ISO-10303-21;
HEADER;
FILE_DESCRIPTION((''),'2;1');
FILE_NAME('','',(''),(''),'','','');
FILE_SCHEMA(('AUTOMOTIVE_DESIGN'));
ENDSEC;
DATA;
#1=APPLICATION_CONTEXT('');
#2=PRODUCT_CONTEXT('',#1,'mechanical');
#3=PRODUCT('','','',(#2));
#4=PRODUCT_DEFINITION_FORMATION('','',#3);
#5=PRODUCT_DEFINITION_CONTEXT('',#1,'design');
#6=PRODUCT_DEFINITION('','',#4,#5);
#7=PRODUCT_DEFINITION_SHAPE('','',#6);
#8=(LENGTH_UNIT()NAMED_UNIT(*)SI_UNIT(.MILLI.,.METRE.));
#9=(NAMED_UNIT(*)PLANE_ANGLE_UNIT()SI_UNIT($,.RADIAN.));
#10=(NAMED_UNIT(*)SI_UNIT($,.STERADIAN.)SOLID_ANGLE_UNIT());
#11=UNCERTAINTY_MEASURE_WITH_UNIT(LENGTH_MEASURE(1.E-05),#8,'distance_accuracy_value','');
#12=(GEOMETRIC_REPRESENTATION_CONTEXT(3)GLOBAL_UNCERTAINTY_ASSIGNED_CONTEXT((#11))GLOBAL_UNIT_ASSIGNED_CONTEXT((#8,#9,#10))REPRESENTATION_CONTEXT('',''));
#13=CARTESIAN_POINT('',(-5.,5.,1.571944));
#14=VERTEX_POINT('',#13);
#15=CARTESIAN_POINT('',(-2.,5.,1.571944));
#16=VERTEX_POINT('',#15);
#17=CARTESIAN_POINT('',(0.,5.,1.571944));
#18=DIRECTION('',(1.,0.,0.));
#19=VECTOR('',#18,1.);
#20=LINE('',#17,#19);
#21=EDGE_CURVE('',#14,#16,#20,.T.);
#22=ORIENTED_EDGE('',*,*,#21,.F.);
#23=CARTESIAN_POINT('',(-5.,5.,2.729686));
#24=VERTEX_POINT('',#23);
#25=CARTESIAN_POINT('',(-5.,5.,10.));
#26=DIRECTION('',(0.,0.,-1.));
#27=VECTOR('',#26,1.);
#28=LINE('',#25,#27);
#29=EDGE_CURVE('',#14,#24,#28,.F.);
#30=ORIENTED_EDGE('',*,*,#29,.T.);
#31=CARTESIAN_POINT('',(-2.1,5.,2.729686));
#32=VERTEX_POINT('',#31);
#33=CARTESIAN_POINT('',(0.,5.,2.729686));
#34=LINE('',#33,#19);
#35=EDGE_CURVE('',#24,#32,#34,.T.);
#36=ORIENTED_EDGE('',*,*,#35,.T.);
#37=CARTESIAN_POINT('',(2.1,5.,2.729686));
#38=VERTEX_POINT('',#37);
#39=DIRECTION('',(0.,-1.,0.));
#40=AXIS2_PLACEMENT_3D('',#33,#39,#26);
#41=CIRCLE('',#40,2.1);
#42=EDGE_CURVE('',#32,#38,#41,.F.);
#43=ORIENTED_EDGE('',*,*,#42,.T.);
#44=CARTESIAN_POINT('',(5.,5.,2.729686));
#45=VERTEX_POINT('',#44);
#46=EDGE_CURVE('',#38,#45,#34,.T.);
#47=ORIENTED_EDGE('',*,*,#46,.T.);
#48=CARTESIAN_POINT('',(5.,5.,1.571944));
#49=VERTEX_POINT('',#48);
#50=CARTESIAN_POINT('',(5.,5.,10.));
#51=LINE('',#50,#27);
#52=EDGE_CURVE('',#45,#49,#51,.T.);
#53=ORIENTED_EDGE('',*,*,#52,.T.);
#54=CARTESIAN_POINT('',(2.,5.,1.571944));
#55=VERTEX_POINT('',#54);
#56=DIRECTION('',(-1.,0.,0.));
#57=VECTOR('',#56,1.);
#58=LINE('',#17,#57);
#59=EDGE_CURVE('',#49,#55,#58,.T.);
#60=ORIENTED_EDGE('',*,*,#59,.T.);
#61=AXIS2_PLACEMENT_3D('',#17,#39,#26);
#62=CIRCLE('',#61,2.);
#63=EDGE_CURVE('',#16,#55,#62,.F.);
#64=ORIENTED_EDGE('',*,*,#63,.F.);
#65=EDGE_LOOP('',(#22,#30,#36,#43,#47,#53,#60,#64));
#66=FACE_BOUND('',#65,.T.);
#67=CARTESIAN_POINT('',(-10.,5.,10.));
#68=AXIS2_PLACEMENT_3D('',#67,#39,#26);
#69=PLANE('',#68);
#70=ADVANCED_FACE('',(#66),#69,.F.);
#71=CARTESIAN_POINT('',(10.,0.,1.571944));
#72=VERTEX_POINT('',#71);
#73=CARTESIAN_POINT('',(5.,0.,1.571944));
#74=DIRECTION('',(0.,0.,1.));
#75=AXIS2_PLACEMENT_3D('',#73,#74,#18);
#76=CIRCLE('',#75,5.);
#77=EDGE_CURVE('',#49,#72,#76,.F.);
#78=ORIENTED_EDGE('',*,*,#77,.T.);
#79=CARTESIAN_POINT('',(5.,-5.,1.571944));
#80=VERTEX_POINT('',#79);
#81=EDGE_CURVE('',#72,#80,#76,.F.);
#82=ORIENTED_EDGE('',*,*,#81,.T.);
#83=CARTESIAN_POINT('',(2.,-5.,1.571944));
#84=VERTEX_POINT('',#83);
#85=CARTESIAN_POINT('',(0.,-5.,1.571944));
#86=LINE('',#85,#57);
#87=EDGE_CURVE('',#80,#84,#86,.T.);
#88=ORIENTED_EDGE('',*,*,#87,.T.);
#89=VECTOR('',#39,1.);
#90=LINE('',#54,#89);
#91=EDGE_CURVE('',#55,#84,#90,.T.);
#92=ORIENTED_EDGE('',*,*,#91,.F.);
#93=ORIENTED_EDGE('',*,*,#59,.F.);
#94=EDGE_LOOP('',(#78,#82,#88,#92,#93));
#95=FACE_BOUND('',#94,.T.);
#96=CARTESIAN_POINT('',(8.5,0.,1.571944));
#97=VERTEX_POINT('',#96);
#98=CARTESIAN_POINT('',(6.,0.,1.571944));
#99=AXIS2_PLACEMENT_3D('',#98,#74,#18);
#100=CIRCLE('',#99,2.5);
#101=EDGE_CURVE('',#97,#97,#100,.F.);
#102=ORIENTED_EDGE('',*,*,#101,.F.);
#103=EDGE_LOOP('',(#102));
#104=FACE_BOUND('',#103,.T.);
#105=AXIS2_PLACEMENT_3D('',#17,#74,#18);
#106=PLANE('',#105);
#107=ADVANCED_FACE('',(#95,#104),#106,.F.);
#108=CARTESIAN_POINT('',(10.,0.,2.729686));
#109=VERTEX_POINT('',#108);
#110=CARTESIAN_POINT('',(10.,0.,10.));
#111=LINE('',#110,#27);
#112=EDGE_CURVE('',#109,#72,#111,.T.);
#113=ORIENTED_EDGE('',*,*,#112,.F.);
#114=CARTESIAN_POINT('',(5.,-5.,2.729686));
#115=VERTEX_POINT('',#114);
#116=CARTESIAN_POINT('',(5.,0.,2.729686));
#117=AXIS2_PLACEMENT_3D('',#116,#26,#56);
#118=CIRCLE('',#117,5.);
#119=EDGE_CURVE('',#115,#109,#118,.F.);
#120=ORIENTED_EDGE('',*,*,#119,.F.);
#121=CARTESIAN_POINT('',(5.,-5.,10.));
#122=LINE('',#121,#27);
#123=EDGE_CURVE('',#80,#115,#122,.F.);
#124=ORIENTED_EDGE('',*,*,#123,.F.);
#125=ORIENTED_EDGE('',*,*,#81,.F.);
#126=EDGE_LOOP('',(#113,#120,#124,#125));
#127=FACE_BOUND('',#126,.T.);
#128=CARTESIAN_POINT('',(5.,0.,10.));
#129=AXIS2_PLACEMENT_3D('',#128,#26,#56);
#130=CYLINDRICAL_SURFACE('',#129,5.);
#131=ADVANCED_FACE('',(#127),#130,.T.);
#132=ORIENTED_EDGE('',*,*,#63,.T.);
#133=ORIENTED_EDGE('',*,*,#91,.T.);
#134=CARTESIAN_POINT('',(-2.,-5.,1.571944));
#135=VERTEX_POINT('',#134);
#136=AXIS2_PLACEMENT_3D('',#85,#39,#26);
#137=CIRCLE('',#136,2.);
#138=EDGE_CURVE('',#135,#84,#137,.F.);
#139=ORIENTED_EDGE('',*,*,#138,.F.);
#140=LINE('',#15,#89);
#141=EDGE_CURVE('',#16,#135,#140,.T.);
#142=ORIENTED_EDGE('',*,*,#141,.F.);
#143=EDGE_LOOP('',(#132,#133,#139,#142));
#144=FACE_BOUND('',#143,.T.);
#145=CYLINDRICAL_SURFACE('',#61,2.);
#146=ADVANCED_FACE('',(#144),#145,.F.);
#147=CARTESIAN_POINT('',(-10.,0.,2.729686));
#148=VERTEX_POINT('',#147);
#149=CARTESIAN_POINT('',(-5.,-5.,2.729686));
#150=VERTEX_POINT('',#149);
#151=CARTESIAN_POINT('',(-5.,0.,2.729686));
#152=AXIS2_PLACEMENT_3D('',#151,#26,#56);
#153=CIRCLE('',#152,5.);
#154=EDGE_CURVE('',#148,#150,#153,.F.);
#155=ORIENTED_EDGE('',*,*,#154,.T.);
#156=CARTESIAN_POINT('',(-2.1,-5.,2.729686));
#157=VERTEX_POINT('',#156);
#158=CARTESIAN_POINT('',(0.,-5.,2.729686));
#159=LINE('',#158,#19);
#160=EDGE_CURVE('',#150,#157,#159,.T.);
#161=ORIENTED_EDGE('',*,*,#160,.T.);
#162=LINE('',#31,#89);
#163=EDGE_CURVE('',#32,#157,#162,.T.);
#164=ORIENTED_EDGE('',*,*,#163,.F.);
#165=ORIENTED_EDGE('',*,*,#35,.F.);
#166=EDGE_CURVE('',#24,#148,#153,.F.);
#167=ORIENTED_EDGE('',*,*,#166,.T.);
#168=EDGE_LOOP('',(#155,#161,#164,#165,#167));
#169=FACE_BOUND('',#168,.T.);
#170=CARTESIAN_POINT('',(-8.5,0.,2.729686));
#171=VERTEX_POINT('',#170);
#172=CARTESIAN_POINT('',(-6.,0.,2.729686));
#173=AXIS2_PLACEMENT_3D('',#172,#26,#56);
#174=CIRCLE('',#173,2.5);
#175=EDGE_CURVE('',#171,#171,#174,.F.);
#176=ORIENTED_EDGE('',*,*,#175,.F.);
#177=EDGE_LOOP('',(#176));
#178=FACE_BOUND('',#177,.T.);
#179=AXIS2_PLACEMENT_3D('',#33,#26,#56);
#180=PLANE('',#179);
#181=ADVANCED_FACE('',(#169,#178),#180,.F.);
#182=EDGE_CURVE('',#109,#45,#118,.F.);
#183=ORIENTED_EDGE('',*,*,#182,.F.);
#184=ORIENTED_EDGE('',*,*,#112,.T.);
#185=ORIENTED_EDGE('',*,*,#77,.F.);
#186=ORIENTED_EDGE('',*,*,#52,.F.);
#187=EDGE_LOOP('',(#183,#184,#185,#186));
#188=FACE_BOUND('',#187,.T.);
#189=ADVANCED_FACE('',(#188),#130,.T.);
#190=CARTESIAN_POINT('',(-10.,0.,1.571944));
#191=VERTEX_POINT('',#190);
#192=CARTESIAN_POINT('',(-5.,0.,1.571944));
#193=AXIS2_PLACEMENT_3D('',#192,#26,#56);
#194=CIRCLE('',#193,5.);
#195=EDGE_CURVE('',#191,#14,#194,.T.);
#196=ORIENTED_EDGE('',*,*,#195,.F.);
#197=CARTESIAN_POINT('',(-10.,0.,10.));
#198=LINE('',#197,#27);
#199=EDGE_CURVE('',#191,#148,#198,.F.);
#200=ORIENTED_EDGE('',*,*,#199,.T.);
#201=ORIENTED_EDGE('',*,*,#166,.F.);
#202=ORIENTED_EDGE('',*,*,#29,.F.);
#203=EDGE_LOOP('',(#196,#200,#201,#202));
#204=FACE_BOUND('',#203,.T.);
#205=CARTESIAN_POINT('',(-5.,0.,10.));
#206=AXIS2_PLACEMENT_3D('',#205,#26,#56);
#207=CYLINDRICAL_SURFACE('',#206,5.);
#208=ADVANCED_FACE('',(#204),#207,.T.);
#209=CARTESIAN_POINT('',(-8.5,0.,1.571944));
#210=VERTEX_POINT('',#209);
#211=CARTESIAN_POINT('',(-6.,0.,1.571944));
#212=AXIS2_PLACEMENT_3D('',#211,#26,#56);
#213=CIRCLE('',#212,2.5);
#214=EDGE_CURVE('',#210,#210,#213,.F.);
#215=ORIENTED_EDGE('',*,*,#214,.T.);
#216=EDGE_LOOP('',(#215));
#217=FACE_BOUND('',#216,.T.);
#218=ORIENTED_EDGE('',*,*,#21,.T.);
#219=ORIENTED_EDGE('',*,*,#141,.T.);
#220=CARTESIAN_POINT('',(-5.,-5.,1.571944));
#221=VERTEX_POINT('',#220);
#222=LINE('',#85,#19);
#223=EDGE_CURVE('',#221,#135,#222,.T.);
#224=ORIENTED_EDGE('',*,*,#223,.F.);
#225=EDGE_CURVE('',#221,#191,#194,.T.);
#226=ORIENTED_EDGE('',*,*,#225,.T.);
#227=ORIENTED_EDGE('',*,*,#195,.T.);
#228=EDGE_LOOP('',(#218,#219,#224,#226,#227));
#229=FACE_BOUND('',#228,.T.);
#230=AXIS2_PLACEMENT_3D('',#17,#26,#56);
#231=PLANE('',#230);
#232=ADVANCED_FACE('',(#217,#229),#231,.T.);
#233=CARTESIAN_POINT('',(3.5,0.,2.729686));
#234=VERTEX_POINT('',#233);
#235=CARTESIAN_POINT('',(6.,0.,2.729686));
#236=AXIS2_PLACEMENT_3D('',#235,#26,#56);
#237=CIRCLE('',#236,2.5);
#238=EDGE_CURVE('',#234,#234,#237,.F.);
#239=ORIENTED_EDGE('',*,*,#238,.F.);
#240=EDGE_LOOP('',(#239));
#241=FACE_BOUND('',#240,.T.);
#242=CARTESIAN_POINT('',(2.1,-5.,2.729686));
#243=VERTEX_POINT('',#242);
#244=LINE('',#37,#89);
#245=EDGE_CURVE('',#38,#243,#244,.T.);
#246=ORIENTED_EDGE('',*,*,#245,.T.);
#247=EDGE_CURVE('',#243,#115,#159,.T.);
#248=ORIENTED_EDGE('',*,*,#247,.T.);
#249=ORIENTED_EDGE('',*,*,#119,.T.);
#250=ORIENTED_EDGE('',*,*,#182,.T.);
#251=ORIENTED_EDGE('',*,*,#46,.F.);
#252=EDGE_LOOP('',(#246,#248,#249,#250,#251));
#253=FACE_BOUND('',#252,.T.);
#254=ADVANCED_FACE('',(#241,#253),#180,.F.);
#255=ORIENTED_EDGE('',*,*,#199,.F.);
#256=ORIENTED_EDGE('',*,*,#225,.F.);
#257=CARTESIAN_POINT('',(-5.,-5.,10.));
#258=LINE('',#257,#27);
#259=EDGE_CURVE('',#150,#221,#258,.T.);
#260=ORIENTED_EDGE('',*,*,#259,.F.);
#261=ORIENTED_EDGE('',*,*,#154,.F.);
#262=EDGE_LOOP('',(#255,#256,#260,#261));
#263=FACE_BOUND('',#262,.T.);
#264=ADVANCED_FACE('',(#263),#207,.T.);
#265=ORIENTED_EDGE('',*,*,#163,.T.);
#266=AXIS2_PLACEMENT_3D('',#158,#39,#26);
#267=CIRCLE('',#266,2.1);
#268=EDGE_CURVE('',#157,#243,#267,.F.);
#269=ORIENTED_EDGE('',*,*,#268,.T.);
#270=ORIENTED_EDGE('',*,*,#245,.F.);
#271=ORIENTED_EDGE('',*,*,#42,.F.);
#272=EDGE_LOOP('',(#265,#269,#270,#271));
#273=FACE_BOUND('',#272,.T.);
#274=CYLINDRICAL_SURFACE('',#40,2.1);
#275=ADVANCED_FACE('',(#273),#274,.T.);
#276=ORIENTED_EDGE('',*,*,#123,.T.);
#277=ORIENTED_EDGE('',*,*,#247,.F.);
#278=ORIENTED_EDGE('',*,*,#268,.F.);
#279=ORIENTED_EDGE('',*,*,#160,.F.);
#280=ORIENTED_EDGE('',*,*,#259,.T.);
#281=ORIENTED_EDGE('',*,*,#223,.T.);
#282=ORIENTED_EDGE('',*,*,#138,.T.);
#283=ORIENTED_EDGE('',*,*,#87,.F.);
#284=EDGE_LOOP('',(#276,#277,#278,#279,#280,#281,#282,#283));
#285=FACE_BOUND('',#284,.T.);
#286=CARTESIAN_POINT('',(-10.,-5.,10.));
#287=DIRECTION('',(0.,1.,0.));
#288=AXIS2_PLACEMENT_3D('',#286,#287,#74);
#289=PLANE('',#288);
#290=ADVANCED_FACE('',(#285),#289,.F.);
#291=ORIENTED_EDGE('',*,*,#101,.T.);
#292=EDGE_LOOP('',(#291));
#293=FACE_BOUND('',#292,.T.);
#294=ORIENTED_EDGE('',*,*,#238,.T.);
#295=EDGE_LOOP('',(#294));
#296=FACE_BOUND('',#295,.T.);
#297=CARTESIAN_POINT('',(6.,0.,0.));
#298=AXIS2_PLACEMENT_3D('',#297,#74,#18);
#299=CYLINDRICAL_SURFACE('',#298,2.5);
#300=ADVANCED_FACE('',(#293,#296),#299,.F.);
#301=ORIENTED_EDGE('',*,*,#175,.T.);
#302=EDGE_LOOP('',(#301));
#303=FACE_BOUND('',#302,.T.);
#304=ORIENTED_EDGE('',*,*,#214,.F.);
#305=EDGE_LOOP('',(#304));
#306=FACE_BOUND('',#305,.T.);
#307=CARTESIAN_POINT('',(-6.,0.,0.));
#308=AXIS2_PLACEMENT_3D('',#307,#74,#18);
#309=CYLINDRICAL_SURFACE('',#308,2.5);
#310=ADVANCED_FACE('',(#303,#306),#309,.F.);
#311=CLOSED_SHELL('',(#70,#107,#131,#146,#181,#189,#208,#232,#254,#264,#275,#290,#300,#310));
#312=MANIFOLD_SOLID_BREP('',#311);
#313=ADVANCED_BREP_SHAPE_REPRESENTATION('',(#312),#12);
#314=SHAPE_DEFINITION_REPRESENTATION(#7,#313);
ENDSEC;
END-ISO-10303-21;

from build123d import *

# Parameters (mm, degrees)
SZKIC1_W                    = 20
SZKIC1_H                    = 10
DODANIE_WYCI_GNI_CIE1_DEPTH = 10
SZKIC2_R                    = 2.5
WYTNIJ_WYCI_GNI_CIE1_DEPTH  = 10
WYTNIJ_WYCI_GNI_CIE2_DEPTH  = 10
WYTNIJ_WYCI_GNI_CIE3_DEPTH  = 10
ZAOKR_GLENIE2_R             = 5


with BuildPart() as part:
    # Szkic1 → Dodanie-wyciągnięcie1 (new body)
    with BuildSketch(Plane.XY):
        Rectangle(SZKIC1_W, SZKIC1_H)
    extrude(amount=DODANIE_WYCI_GNI_CIE1_DEPTH)

    # Szkic2 → Wytnij-wyciągnięcie1 (cut)
    with BuildSketch(Plane.XY.offset(10)):
        with Locations((-6, 0)):
            Circle(SZKIC2_R)
        with Locations((6, 0)):
            Circle(SZKIC2_R)
    extrude(amount=-WYTNIJ_WYCI_GNI_CIE1_DEPTH, mode=Mode.SUBTRACT)

    # Szkic3 → Wytnij-wyciągnięcie2 (cut)
    with BuildSketch(Plane.XZ.offset(5)):
        with BuildLine():
            Line((-10, 10), (-10, 2.729686207))
            Line((-10, 2.729686207), (-2.1, 2.729686207))
            ThreePointArc((-2.1, 2.729686207), (0, 4.829686207), (2.1, 2.729686207))
            Line((2.1, 2.729686207), (10, 2.729686207))
            Line((10, 2.729686207), (10, 10))
            Line((10, 10), (-10, 10))
        make_face()
    extrude(amount=-WYTNIJ_WYCI_GNI_CIE2_DEPTH, mode=Mode.SUBTRACT)

    # Szkic3<3> → Wytnij-wyciągnięcie3 (cut)
    with BuildSketch(Plane.XZ.offset(5)):
        with BuildLine():
            Line((-2, 1.571944273), (-10, 1.571944273))
            Line((-10, 1.571944273), (-10, 0))
            Line((-10, 0), (10, 0))
            Line((10, 0), (10, 1.571944273))
            Line((10, 1.571944273), (2, 1.571944273))
            ThreePointArc((2, 1.571944273), (0, 3.571944273), (-2, 1.571944273))
        make_face()
    extrude(amount=-WYTNIJ_WYCI_GNI_CIE3_DEPTH, mode=Mode.SUBTRACT)

    # Zaokrąglenie2
    zaokr_glenie2_edges = [part.edges().sort_by_distance(p)[0] for p in [
        (10, 5, 2.15081524),
        (10, -5, 2.15081524),
        (-10, 5, 2.15081524),
        (-10, -5, 2.15081524),
    ]]
    fillet(zaokr_glenie2_edges, radius=ZAOKR_GLENIE2_R - 0.0001)  # a hair under: the kernel refuses the full size


solid = part.part
